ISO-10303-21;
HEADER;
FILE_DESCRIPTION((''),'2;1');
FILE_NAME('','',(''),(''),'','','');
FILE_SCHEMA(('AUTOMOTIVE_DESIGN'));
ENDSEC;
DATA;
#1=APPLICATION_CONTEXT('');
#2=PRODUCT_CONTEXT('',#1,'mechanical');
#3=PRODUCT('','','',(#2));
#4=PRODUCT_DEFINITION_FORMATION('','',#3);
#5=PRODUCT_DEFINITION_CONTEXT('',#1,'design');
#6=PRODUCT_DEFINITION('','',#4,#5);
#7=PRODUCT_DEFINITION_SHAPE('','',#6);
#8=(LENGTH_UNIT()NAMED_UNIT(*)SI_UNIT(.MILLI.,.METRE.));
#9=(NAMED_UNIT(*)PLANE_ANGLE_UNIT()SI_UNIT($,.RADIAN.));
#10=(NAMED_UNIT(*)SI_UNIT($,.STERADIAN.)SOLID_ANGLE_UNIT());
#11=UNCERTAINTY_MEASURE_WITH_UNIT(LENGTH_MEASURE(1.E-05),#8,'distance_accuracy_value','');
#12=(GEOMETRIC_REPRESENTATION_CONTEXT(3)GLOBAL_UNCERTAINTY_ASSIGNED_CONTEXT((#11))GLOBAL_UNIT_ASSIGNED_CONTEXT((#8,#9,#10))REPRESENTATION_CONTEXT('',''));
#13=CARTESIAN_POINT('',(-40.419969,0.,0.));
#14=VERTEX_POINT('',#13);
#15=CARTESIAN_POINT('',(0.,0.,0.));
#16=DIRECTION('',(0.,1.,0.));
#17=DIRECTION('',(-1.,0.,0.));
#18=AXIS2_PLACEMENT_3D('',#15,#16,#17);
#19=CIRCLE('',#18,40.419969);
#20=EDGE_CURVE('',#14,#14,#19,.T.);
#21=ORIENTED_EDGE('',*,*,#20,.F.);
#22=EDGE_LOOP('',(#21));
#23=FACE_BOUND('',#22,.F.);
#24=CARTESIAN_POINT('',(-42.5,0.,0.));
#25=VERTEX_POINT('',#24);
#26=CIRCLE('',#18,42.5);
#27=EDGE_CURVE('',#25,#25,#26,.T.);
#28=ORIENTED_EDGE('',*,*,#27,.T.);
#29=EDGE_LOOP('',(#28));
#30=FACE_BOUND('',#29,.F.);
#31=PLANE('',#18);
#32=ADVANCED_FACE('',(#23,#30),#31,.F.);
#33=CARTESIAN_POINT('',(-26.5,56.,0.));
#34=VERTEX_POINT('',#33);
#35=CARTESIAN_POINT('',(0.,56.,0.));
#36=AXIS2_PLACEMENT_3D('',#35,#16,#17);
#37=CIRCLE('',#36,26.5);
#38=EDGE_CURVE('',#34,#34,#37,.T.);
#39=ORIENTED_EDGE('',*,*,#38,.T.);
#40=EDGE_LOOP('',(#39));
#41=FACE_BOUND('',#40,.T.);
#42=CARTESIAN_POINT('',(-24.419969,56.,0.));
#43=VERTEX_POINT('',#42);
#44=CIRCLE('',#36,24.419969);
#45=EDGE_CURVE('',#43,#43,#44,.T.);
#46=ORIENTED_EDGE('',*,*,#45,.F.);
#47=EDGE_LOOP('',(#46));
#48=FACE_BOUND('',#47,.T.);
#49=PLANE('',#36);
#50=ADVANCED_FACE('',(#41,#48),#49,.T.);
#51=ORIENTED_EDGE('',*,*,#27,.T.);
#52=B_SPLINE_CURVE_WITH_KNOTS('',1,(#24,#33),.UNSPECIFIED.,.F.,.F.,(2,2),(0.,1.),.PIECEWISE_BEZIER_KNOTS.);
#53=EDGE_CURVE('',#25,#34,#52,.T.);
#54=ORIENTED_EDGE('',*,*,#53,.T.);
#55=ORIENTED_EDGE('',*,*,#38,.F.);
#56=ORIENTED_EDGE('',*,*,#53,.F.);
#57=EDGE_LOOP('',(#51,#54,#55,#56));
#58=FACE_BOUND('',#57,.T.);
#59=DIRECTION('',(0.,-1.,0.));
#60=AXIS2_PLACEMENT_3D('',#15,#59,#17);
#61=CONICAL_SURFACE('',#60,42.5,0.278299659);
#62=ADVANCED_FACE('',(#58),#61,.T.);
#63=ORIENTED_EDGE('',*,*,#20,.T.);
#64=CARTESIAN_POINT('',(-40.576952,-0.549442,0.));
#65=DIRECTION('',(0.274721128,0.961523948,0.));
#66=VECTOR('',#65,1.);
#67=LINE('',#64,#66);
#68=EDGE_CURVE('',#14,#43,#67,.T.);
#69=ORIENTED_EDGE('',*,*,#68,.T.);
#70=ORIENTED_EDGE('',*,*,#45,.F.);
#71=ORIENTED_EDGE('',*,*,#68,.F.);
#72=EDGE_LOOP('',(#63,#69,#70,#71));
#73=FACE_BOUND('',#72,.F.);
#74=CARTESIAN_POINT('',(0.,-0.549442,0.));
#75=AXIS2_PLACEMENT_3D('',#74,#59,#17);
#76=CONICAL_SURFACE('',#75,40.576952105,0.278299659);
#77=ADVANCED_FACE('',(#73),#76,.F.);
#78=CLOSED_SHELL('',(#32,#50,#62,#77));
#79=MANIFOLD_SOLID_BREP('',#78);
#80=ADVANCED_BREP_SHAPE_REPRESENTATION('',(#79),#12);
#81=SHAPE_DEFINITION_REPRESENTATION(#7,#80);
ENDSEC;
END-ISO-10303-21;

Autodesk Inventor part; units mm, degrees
ref_plane "YZ Plane" through (0, 0, 0) normal (1, 0, 0) x (0, 1, 0)
ref_plane "XY Plane" through (0, 0, 0) normal (0, 0, 1) x (1, 0, 0)
sketch "Szkic6" plane through (0, 0, 0) normal (0, 1, 0) x (-1, 0, 0)
  circle A0 centre (0, 0) radius 42.5
  dimension "d33" = 85
ref_plane "Płaszczyzna konstrukcyjna1" through (0, 56, 0) normal (0, 1, 0) x (-1, 0, 0)
sketch "Szkic7" plane through (0, 56, 0) normal (0, 1, 0) x (-1, 0, 0)
  circle A0 centre (0, 0) radius 26.5
  dimension "d35" = 53
loft "Wyciągnięcie złożone1" add profiles "Szkic6", "Szkic7"
shell "Skorupa1" thickness 2 removed faces 2 at (-1.8199, 56, -2.5499) at (10.6049, 0, 7.3037)
equation "\"d33\" = OD1"
equation "\"d35\" = OD2"
equation "\"d52\" = THK"
equation "\"SzerokośćGięciaPodcięcia\" = Grubość"
equation "\"RozmiarPodcięciaNarożnika\" = 4 * Grubość"
equation "\"PromieńPrzejścia\" = PromieńGięcia"
equation "\"Rozmiar_promienia_Jacobiego\" = PromieńGięcia"
equation "\"Wielk_odstępu\" = Grubość"
equation "\"d2\" = PromieńGięcia"
equation "\"d23\" = PromieńGięcia"
equation "\"OD1\" = 85"
equation "\"OD2\" = 53"
equation "\"L\" = 56"
equation "\"THK\" = 2"
equation "\"d34\" = L"
equation "\"Grubość\" = 1.5"
equation "\"PromieńGięcia\" = 3"
properties part number "Redukcja symetryczna Ø85x53x2 L=56" material "304"
